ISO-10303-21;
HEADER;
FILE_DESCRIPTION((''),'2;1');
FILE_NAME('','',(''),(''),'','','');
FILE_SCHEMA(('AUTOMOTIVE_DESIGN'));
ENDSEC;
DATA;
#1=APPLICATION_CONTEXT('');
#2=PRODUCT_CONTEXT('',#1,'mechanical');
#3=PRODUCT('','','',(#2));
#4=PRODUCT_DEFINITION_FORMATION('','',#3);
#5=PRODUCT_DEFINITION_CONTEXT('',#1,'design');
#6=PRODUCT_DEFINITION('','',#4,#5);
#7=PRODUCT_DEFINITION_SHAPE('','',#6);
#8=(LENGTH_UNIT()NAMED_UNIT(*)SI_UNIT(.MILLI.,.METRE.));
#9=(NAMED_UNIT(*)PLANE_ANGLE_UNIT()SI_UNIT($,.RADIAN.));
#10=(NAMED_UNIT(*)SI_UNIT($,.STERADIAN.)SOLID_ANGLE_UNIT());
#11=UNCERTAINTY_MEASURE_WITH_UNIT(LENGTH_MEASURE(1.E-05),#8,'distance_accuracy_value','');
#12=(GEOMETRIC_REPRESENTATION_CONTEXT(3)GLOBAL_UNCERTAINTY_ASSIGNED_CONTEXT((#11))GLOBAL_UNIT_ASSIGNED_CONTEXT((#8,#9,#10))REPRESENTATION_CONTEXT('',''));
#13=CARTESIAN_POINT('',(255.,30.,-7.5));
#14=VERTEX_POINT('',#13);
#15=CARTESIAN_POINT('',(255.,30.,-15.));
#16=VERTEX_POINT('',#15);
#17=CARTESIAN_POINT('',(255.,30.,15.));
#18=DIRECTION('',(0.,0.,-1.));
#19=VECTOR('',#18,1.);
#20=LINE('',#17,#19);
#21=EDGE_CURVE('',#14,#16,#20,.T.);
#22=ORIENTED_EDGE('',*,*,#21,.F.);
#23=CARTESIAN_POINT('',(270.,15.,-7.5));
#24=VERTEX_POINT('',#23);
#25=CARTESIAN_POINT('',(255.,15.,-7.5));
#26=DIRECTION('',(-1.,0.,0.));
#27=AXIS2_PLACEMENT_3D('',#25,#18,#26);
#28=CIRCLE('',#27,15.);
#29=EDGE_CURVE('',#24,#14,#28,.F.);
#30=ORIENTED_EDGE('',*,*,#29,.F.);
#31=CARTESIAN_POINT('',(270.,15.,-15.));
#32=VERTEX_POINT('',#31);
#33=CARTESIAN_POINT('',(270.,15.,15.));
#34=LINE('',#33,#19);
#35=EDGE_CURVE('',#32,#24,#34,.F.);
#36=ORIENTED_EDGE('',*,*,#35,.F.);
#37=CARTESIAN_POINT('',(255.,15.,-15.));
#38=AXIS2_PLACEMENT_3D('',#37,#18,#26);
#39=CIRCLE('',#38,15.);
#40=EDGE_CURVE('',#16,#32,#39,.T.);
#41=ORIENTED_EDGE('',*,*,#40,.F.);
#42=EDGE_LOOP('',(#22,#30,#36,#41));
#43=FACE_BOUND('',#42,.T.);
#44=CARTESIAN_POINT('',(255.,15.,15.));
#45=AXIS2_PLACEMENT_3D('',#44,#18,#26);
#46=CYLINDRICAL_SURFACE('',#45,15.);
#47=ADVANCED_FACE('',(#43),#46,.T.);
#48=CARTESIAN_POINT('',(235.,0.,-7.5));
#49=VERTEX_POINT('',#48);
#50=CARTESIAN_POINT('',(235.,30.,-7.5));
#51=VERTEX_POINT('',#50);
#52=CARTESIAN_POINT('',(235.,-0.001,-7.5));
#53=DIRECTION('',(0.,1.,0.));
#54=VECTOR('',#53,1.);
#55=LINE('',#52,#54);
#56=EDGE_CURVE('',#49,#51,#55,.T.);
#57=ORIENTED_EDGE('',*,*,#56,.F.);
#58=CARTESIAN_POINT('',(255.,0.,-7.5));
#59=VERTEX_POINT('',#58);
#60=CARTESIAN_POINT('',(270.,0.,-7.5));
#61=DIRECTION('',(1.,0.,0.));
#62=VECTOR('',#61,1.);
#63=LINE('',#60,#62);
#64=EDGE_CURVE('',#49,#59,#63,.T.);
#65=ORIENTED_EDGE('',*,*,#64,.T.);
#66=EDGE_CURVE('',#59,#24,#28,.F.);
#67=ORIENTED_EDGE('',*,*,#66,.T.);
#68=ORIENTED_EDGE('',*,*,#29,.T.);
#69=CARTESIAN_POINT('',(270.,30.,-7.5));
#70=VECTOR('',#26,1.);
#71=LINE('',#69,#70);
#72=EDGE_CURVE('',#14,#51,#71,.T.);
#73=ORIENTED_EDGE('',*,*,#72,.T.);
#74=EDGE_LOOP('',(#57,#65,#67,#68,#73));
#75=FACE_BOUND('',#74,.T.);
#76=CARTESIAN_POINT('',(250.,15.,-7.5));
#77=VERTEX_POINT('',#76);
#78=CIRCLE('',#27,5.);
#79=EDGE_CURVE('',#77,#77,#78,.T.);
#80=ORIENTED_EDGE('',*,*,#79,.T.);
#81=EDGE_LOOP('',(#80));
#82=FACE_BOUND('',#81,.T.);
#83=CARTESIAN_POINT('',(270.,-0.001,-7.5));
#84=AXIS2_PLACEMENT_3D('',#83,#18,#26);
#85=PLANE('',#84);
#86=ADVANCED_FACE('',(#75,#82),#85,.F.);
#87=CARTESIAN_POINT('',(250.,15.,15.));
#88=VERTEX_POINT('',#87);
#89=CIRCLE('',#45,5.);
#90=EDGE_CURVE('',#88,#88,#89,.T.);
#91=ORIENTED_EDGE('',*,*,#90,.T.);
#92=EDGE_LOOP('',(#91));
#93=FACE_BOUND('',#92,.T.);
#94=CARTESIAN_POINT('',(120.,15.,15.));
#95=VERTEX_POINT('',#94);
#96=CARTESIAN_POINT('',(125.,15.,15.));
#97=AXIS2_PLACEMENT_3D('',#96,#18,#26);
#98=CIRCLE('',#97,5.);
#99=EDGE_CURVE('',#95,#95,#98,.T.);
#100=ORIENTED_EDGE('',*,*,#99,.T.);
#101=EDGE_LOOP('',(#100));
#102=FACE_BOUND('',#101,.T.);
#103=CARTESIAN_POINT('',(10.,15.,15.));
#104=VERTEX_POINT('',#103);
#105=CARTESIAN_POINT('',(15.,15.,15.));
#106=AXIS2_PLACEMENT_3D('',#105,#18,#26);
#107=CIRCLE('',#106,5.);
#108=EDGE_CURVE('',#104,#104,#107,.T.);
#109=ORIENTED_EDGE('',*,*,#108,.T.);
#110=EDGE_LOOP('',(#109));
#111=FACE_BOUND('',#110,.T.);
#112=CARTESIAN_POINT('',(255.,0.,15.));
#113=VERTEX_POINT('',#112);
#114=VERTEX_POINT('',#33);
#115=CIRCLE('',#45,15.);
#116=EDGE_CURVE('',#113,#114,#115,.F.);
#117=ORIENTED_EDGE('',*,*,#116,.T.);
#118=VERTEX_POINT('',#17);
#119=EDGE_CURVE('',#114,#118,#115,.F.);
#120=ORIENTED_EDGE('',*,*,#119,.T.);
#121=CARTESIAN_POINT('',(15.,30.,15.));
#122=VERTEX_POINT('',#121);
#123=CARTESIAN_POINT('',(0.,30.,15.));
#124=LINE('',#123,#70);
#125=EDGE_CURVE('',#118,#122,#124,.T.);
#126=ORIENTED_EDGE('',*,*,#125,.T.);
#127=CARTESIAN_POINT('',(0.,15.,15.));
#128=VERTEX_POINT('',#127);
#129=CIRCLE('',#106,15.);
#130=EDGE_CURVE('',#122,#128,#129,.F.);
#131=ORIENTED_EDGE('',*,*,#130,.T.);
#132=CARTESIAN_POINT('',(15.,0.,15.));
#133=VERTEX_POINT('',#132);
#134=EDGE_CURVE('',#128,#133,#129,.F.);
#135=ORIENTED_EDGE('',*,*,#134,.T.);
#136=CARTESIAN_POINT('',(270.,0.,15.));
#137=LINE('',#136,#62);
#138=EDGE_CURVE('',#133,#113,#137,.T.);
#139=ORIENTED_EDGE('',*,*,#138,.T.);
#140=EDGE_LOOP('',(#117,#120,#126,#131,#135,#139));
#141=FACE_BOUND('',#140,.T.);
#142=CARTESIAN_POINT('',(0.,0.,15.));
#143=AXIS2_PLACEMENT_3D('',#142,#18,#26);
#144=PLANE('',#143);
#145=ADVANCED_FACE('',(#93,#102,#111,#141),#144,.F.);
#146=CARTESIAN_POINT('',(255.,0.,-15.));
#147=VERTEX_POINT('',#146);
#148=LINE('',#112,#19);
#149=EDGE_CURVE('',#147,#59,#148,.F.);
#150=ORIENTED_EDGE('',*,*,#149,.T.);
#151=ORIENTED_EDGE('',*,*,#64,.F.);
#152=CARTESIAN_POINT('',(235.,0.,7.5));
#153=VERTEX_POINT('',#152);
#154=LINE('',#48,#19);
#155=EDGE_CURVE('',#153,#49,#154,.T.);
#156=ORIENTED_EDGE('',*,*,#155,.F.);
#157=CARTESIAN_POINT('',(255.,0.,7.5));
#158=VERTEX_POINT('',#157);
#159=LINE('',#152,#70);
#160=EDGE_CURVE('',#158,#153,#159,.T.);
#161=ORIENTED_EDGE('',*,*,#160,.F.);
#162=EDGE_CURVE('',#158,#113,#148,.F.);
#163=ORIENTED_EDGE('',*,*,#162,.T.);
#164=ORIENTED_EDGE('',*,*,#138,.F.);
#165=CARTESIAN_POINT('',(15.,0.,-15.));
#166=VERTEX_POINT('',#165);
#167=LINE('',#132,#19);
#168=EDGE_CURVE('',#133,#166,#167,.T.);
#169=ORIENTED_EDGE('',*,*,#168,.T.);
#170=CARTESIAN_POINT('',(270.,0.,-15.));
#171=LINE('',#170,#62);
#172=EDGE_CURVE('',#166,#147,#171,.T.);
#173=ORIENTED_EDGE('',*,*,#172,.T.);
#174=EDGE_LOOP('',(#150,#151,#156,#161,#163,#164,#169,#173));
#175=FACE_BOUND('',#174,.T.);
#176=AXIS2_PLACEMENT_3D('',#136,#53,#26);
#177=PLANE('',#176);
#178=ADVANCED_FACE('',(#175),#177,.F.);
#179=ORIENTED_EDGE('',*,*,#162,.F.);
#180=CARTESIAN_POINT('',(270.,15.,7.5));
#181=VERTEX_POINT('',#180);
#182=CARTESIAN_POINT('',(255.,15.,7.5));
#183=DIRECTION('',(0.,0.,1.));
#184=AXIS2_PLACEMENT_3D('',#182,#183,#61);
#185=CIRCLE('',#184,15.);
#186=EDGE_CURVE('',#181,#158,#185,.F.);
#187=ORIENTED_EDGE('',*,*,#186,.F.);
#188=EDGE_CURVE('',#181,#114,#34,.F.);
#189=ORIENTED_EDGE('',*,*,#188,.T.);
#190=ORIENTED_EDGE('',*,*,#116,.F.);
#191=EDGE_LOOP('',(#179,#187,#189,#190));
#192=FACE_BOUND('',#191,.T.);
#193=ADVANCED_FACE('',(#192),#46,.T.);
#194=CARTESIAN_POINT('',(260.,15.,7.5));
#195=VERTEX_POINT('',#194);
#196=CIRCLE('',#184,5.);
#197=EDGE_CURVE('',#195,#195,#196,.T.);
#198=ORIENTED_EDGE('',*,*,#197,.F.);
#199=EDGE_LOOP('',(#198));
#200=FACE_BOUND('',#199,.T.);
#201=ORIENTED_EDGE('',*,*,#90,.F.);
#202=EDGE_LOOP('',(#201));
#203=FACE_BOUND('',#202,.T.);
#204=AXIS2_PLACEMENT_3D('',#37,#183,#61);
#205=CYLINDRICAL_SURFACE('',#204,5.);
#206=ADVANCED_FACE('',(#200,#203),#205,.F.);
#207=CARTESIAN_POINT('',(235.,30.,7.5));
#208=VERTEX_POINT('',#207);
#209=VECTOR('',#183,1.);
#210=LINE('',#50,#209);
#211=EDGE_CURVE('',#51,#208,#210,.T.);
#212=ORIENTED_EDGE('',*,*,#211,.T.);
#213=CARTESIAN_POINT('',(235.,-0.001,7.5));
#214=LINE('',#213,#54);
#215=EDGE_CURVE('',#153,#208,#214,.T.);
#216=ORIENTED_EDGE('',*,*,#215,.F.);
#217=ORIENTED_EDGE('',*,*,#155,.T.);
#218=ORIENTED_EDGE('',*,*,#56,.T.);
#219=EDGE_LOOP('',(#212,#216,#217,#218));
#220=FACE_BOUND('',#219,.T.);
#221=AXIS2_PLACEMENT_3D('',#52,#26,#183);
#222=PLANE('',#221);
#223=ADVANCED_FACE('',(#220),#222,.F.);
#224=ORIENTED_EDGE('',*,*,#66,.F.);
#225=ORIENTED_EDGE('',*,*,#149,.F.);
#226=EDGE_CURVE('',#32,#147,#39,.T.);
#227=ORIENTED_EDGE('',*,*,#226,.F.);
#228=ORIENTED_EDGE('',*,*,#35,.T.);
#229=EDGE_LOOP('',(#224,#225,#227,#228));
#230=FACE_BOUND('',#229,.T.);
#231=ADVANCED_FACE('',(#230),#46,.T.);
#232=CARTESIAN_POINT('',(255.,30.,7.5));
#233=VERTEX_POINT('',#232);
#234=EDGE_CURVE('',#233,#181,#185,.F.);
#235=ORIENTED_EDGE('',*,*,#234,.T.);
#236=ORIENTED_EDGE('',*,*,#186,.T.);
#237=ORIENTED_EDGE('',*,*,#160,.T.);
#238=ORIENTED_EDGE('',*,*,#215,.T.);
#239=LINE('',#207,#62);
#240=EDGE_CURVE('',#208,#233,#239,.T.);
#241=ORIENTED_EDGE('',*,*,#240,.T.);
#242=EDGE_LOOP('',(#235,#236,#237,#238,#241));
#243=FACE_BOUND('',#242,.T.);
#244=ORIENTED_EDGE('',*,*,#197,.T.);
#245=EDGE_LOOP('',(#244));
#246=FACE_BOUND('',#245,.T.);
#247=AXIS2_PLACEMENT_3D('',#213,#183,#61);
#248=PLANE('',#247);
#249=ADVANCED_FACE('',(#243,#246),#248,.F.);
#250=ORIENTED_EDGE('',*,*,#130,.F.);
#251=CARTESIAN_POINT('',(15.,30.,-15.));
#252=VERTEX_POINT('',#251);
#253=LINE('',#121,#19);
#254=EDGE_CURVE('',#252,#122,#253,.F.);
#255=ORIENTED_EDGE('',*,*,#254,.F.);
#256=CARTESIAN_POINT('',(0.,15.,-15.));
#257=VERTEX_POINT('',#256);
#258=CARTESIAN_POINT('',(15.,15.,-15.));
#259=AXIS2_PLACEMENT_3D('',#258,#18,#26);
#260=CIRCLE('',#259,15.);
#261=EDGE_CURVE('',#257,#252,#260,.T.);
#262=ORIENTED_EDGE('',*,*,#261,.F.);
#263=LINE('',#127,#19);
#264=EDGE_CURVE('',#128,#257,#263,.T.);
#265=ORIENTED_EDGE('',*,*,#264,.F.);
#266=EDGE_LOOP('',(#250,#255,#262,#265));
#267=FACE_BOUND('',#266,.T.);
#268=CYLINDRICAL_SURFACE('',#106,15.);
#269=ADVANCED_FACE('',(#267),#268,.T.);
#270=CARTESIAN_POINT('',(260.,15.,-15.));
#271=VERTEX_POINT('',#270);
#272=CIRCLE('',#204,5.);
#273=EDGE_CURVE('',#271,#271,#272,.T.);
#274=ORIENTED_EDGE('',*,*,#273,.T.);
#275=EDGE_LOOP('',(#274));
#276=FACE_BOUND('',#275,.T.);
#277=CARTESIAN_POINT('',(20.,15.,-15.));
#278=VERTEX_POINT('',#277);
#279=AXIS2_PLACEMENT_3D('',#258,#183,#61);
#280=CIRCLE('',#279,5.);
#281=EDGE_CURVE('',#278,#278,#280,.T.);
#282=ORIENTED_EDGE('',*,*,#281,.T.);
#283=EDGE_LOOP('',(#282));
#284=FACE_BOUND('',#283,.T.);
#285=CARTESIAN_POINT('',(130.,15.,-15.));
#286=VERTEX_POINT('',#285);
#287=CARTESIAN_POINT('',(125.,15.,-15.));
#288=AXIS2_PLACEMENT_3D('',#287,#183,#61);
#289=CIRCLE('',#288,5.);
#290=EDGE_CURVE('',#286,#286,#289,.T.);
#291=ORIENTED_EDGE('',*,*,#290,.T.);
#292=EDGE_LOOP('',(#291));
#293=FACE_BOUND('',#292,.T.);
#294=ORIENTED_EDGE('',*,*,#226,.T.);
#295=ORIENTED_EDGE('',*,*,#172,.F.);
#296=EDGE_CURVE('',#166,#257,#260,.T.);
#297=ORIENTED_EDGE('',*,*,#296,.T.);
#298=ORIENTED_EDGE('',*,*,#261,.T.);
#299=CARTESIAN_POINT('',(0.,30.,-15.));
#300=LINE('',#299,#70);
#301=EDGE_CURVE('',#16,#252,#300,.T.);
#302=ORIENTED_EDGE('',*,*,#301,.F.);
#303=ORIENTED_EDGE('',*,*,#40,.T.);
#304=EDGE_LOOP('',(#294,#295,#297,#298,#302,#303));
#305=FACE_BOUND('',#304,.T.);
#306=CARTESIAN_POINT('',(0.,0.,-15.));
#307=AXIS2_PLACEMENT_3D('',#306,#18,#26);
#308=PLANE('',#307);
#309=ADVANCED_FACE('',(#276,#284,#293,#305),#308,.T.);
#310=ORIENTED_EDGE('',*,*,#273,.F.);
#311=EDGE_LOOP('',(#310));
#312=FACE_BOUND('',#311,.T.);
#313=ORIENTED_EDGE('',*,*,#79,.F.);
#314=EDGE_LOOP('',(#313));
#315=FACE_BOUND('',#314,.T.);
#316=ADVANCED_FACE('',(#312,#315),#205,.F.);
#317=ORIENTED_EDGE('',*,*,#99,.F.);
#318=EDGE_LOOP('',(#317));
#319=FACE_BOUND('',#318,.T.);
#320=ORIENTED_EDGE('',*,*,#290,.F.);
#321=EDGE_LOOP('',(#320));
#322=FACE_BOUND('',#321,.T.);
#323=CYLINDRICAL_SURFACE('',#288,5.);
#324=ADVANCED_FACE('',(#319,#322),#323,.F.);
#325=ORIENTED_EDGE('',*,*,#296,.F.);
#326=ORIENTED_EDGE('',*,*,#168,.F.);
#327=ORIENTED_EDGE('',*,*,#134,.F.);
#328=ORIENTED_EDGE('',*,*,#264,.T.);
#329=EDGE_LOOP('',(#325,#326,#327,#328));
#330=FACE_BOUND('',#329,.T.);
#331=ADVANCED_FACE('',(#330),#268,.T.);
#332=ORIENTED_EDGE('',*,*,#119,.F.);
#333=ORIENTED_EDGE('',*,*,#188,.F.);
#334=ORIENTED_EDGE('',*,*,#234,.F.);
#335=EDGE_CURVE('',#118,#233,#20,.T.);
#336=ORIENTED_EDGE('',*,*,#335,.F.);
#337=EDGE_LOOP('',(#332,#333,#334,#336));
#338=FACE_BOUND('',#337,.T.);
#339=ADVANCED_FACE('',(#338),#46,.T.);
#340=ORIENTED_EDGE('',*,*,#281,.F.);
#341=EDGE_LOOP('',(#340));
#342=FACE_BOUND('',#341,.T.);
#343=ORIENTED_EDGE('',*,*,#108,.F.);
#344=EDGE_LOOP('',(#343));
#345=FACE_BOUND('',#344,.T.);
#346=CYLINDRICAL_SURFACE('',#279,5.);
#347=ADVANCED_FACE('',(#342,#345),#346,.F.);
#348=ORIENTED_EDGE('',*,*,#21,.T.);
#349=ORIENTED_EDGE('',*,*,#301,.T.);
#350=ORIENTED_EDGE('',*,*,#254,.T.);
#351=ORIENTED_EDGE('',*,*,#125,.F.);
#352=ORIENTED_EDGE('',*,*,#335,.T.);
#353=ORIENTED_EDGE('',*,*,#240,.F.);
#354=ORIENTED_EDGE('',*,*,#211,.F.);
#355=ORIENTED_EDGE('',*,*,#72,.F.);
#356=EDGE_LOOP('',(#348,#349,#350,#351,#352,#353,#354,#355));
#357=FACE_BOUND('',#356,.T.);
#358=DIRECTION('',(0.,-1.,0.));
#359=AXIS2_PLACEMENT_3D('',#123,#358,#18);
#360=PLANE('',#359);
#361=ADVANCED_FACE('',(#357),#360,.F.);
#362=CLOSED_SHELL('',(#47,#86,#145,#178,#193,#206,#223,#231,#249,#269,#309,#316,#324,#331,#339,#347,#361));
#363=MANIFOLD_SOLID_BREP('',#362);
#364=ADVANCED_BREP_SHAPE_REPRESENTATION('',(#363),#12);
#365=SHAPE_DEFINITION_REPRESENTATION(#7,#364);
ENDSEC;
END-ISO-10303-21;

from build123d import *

# Parameters (mm, degrees)
SKETCH1_W               = 270
SKETCH1_H               = 30
BOSS_EXTRUDE1_DEPTH     = 15
CUT_EXTRUDE1_REACH      = 274.075
SKETCH2_W               = 35
SKETCH2_H               = 15
CUT_EXTRUDE2_DEPTH      = 274.313007374
CUT_EXTRUDE2_DEPTH_BACK = 274.313007374
SKETCH3_R               = 5
FILLET3_R               = 15


with BuildPart() as part:
    # Sketch1 → Boss-Extrude1 (new, symmetric)
    with BuildSketch(Plane.XY):
        with Locations((135, 15)):
            Rectangle(SKETCH1_W, SKETCH1_H)
    extrude(amount=BOSS_EXTRUDE1_DEPTH, both=True)

    # Sketch2 → Cut-Extrude1 (cut, up to next)
    with BuildSketch(Plane(origin=(0, 30, 0), x_dir=(1, 0, 0), z_dir=(0, 1, 0)), mode=Mode.PRIVATE) as cut_extrude1_sk1:
        with Locations((252.5, 0)):
            Rectangle(SKETCH2_W, SKETCH2_H)
    cut_extrude1_tool1 = extrude(cut_extrude1_sk1.sketch, amount=-CUT_EXTRUDE1_REACH, mode=Mode.PRIVATE) & part.part
    add(cut_extrude1_tool1.solids().sort_by_distance((252.5, 30, 0))[0], mode=Mode.SUBTRACT)

    # Sketch3 → Cut-Extrude2 (cut, two sides: drawn at the far end of the back side and taken through both)
    with BuildSketch(Plane.XY.offset(15).offset(-CUT_EXTRUDE2_DEPTH_BACK)):
        with Locations((15, 15)):
            Circle(SKETCH3_R)
        with Locations((255, 15)):
            Circle(SKETCH3_R)
        with Locations((125, 15)):
            Circle(SKETCH3_R)
    extrude(amount=CUT_EXTRUDE2_DEPTH + CUT_EXTRUDE2_DEPTH_BACK, mode=Mode.SUBTRACT)

    # Fillet3
    fillet3_edges = [part.edges().sort_by_distance(p)[0] for p in [
        (270, 0, -11.25),
        (270, 30, -11.25),
        (270, 0, 11.25),
        (270, 30, 11.25),
        (0, 0, 0),
        (0, 30, 0),
    ]]
    fillet(fillet3_edges, radius=FILLET3_R - 0.0001)  # a hair under: the kernel refuses the full size


solid = part.part
